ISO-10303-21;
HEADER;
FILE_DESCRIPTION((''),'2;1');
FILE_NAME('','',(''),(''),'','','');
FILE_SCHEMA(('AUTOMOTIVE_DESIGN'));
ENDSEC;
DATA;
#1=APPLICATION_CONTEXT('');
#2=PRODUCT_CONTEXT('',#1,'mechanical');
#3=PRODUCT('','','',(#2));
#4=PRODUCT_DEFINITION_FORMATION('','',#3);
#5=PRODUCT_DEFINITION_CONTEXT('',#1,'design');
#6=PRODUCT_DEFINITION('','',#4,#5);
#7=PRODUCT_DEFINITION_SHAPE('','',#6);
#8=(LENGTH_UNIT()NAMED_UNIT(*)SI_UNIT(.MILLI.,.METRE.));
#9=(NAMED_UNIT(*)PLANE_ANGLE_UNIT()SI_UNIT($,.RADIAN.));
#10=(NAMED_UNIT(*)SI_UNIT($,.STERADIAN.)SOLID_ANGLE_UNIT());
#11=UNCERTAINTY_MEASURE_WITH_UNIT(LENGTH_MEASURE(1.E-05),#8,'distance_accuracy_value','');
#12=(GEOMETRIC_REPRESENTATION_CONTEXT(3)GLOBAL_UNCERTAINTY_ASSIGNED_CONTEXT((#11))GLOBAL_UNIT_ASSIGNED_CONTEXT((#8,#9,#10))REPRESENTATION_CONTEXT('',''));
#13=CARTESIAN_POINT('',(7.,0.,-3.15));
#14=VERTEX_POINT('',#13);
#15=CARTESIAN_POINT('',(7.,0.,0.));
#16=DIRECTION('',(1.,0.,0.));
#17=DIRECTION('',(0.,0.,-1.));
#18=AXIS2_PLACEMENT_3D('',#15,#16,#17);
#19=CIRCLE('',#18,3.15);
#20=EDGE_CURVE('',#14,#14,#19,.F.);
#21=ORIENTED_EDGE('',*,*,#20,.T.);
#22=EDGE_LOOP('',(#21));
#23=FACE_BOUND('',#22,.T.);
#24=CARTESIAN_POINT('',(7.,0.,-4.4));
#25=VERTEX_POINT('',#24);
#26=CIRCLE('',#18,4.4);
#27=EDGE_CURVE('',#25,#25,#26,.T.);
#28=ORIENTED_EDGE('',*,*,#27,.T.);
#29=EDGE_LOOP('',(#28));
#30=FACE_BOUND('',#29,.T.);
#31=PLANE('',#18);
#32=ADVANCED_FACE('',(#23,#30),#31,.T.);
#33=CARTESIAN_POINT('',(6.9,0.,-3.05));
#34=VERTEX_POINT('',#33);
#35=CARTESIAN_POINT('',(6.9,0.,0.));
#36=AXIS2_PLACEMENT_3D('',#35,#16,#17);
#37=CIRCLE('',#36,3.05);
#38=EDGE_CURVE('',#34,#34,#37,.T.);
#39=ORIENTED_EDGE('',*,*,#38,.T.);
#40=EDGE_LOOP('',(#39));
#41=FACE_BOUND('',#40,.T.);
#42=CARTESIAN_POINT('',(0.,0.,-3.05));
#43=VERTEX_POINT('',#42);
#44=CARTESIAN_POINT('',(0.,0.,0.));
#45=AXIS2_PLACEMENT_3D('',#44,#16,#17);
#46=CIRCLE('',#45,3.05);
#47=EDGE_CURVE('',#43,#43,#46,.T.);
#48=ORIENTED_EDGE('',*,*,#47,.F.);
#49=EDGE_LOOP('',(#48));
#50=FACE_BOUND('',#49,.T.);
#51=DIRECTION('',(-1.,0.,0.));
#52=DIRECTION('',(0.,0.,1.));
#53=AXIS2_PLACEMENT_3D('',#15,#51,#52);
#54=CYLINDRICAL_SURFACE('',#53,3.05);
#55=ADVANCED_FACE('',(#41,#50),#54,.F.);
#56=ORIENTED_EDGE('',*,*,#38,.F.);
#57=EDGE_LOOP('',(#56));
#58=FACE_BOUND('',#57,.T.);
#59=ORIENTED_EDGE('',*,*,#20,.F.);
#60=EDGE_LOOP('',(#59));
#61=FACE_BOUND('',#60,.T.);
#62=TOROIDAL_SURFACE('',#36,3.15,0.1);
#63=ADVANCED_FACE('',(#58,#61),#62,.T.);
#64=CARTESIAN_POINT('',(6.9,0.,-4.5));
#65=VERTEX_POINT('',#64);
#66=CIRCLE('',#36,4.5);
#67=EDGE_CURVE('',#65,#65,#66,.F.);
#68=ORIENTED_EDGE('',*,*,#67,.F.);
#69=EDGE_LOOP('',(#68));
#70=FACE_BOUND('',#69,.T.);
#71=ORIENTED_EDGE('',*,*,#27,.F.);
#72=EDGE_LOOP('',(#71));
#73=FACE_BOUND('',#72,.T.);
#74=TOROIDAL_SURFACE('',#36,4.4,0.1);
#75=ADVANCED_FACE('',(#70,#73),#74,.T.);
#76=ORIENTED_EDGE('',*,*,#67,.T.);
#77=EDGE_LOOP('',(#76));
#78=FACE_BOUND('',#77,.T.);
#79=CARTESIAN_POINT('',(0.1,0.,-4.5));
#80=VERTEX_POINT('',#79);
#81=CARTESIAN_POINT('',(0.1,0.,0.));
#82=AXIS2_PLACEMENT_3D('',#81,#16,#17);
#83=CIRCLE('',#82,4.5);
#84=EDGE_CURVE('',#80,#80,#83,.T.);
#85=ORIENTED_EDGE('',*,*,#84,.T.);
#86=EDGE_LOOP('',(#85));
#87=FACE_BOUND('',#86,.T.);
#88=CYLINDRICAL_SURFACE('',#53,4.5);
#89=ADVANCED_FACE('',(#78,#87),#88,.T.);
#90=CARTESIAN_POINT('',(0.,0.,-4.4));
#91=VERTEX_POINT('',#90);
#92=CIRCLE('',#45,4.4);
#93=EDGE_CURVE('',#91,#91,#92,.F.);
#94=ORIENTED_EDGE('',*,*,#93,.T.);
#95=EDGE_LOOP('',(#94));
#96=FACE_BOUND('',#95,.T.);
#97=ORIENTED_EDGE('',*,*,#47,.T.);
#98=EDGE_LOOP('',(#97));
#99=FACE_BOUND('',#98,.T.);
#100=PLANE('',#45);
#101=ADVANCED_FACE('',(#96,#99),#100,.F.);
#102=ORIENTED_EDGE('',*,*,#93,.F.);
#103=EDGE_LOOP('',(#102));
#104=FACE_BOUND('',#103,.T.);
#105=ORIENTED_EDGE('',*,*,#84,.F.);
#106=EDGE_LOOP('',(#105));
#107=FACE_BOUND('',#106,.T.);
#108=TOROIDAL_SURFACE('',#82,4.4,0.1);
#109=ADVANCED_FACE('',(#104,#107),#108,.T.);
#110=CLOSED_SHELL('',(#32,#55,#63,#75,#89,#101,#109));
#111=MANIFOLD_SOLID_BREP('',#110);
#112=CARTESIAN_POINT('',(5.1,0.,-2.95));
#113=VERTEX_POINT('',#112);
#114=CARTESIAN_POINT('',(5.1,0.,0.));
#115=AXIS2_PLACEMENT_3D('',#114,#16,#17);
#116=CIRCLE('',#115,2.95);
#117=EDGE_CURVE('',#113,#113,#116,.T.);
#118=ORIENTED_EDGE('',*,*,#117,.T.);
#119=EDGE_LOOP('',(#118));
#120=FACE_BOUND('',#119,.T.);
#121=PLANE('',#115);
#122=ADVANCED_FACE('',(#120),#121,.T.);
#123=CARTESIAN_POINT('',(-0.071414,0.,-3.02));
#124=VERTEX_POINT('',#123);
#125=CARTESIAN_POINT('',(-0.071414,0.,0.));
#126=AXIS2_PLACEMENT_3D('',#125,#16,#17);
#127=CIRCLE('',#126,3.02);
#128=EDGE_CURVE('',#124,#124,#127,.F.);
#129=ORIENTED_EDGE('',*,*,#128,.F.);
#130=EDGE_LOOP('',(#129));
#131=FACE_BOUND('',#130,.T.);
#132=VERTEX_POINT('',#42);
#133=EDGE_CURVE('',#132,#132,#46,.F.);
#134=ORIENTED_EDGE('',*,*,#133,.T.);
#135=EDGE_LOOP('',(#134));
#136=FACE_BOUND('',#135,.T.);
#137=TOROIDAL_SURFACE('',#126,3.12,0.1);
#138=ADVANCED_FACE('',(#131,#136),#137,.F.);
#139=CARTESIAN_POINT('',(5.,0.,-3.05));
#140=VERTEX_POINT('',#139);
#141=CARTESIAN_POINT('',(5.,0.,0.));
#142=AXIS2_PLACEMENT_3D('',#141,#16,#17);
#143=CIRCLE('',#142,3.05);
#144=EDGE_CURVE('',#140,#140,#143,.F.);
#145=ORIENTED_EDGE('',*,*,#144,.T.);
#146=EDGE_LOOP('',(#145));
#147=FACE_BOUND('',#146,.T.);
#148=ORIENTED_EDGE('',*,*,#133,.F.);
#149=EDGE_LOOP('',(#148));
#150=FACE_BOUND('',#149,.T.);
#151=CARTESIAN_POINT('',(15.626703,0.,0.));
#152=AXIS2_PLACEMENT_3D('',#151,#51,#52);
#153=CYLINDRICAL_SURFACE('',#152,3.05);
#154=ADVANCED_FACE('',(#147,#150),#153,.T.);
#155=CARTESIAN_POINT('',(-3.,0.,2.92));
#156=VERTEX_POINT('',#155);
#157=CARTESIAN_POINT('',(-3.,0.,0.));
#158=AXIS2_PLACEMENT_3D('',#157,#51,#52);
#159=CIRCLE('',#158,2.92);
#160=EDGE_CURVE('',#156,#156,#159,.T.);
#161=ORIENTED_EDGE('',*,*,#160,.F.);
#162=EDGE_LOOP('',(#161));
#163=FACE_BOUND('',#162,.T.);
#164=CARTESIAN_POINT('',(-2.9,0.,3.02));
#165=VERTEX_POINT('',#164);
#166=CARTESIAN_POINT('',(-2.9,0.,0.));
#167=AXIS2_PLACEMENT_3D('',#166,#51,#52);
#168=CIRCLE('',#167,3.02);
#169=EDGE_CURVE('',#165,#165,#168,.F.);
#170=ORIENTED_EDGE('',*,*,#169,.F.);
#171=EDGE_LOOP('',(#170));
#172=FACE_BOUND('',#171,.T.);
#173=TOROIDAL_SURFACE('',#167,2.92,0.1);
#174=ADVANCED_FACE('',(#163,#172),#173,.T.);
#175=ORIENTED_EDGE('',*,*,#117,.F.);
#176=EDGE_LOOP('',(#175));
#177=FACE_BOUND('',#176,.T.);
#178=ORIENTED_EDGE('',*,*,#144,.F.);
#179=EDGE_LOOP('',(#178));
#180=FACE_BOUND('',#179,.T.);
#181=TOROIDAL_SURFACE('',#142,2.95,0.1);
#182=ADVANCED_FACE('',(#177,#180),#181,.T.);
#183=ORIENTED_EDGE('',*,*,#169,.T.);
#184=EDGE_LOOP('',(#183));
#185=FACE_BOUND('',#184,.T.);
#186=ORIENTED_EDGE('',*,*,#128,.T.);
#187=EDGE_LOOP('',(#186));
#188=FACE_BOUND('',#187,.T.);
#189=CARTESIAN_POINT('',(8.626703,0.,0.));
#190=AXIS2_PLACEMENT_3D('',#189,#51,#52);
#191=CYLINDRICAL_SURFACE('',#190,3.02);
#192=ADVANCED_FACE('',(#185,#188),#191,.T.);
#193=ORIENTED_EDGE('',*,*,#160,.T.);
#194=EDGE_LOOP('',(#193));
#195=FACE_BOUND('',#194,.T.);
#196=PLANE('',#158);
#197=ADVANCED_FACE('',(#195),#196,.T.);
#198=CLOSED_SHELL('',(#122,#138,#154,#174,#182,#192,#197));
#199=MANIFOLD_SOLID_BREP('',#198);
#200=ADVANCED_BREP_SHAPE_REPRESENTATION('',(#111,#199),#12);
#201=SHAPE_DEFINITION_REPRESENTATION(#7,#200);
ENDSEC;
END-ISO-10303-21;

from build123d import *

# Parameters (mm, degrees)
SKETCH_1_R           = 4.5
SKETCH_1_R_2         = 3.05
EXTRUDE_1_DEPTH      = 7
EXTRUDE_2_DEPTH      = 3
EXTRUDE_2_DEPTH_BACK = 5.1
SKETCH_2_R           = 3.05
SKETCH_3_R           = 3.05
SKETCH_3_R_2         = 3.02
CUT_EXTRUDE_1_DEPTH  = 3
FILLET_1_R           = 0.1
FILLET_2_R           = 0.1
FILLET_3_R           = 0.1
FILLET_4_R           = 0.1


with BuildPart() as part:
    # 草图1 → 凸台-拉伸1 (new body)
    with BuildSketch(Plane(origin=(0, 0, 0), x_dir=(0, 0, -1), z_dir=(1, 0, 0))):
        Circle(SKETCH_1_R)
        Circle(SKETCH_1_R_2, mode=Mode.SUBTRACT)
    extrude(amount=EXTRUDE_1_DEPTH)

    # 圆角1
    fillet_1_edges = [part.edges().sort_by_distance(p)[0] for p in [
        (0, 0, 4.5),
        (7, 0, 4.5),
        (7, 0, 3.05),
    ]]
    fillet(fillet_1_edges, radius=FILLET_1_R)


with BuildPart() as body_2:
    # 草图2 → 凸台-拉伸2 (new, two sides: drawn at the far end of the back side and taken through both)
    with BuildSketch(Plane.ZY.offset(-EXTRUDE_2_DEPTH_BACK)):
        Circle(SKETCH_2_R)
    extrude(amount=EXTRUDE_2_DEPTH + EXTRUDE_2_DEPTH_BACK)

    # 草图3 → 切除-拉伸1 (cut)
    with BuildSketch(Plane.ZY.offset(3)):
        with Locations(Location((0, 0, 0), (0, 0, 180))):
            Circle(SKETCH_3_R)
        Circle(SKETCH_3_R_2, mode=Mode.SUBTRACT)
    extrude(amount=-CUT_EXTRUDE_1_DEPTH, mode=Mode.SUBTRACT)

    # 圆角2
    fillet_2_edges = [body_2.edges().sort_by_distance(p)[0] for p in [
        (-3, 0, -3.02),
    ]]
    fillet(fillet_2_edges, radius=FILLET_2_R)

    # 圆角3
    # the kernel refuses this fillet: 0.1 mm, written as the material it adds along each edge
    with BuildSketch(Plane(origin=(0, 0, 0), x_dir=(0, 0, 1), z_dir=(0, -1, 0))) as fillet_3_piece_1:
        with BuildLine():
            CenterArc((3.12, 0.071414284), FILLET_3_R, 180, 45.572995999)
            Line((3.05, 0), (3.0486, -0.001428286))
            ThreePointArc((3.0486, -0.001428286), (3.035, -0.002), (3.02, -0.002))
            Line((3.02, -0.002), (3.018, 0))
            Line((3.018, 0), (3.018, 0.071414284))
            Line((3.018, 0.071414284), (3.02, 0.071414284))
        make_face()
    revolve(axis=Axis((0, 0, 0), (-1, 0, 0)))

    # 圆角4
    fillet_4_edges = [body_2.edges().sort_by_distance(p)[0] for p in [
        (5.1, 0, -3.05),
    ]]
    fillet(fillet_4_edges, radius=FILLET_4_R)


solid = Compound([part.part, body_2.part])
